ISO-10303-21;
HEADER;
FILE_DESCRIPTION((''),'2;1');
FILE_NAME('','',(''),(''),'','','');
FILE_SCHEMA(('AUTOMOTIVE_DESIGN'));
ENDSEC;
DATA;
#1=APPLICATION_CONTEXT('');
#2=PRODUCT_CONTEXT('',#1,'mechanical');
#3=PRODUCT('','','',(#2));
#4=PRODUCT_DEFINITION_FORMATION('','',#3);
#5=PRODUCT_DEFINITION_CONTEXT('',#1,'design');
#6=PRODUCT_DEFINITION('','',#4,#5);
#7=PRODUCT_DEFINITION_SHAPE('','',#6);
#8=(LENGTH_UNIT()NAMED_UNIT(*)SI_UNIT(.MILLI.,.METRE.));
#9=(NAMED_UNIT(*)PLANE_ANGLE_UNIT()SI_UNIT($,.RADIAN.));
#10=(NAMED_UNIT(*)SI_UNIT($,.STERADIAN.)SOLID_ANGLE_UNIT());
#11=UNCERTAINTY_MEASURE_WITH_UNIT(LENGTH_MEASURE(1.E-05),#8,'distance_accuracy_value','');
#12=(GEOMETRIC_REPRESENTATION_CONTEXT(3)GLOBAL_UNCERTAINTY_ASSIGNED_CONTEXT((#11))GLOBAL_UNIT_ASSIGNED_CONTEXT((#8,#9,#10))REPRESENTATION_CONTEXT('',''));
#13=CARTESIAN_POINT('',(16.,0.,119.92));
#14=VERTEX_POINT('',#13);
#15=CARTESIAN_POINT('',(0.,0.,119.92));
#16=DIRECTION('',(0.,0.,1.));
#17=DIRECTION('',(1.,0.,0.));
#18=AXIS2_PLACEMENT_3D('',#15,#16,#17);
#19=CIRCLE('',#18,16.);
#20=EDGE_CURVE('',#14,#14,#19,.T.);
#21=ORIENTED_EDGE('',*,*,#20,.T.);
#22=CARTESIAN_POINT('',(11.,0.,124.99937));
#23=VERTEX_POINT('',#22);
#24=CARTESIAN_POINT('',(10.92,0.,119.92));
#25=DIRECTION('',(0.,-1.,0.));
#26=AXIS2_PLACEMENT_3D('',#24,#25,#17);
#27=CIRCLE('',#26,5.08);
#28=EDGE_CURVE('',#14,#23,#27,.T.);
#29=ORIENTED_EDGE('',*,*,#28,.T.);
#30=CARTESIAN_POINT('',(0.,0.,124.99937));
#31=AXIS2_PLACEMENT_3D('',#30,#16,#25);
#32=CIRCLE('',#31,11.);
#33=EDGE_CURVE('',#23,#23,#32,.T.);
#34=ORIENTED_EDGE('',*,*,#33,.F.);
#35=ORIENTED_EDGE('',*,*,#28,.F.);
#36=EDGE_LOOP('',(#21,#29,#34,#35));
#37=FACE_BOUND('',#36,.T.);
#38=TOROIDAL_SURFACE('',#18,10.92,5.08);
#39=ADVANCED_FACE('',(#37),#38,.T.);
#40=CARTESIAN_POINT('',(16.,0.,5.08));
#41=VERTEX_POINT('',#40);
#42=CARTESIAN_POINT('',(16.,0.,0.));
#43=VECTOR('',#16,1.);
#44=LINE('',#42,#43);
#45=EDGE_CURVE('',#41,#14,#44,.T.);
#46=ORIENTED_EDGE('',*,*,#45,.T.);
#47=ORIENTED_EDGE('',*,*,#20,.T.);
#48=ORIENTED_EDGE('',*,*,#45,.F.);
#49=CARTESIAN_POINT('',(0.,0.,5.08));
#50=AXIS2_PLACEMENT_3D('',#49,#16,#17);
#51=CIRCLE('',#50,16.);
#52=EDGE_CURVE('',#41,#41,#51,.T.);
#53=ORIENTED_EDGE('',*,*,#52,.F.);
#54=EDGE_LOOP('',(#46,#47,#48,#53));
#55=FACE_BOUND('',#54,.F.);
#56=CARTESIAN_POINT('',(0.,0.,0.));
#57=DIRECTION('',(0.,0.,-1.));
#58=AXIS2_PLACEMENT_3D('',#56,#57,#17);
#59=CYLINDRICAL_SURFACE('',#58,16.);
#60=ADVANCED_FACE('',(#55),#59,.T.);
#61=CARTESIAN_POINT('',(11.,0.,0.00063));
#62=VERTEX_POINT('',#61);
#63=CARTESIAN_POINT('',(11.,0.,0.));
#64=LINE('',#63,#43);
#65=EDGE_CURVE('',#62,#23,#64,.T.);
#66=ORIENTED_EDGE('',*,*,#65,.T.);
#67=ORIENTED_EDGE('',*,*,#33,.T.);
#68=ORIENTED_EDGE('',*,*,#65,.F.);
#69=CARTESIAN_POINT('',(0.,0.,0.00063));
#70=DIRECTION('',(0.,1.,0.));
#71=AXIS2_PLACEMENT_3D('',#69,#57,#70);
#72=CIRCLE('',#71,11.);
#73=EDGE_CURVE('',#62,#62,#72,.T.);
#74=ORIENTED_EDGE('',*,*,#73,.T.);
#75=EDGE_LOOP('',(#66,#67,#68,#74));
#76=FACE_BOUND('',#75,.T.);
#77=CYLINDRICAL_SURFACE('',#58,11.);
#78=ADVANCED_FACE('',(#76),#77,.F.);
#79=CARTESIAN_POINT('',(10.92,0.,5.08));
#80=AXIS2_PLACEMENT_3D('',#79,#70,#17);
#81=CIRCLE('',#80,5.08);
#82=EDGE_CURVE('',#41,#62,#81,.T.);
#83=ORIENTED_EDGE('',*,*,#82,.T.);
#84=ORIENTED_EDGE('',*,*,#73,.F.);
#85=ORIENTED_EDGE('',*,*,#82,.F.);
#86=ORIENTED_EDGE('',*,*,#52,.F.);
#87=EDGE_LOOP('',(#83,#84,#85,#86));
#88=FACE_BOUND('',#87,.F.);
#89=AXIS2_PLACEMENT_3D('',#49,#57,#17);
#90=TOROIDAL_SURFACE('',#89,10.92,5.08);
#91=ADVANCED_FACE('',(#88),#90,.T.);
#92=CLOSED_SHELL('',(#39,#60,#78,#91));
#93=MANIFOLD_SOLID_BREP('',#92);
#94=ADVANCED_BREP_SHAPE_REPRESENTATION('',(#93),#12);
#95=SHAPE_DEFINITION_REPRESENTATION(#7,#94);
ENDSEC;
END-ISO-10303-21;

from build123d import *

# Parameters (mm, degrees)
F0_R     = 16
F0_R_2   = 11
F1_DEPTH = 125


# Not quite as in the source:
# - a fillet or chamfer that OpenCascade refuses, or shapes differently, is made with other operations: its cross-section is extruded or revolved along the edge and cut away or added


with BuildPart() as f1:
    # F0 (on Top) → F1 (new body)
    with BuildSketch(Plane.XY):
        Circle(F0_R)
        Circle(F0_R_2, mode=Mode.SUBTRACT)
    extrude(amount=F1_DEPTH)

    # F2: fillet of radius 5.08 on 1 edges, made by hand

    # F2_s1 → F2_t2 (revolve, cut)
    with BuildSketch(Plane.XZ):
        with BuildLine():
            ThreePointArc((16, 119.92), (14.5121024484, 123.5121024484), (10.92, 125))
            Line((10.92, 125), (16, 125))
            Line((16, 125), (16, 119.92))
        make_face()
    revolve(axis=Axis((0, 0, 125), (0, 0, 1)), mode=Mode.SUBTRACT)

    # F3: fillet of radius 5.08 on 1 edges, made by hand

    # F3_s1 → F3_t2 (revolve, cut)
    with BuildSketch(Plane.XZ):
        with BuildLine():
            ThreePointArc((16, 5.08), (14.5121024484, 1.4878975516), (10.92, 0))
            Line((10.92, 0), (16, 0))
            Line((16, 0), (16, 5.08))
        make_face()
    revolve(axis=Axis((0, 0, 0), (0, 0, 1)), mode=Mode.SUBTRACT)


solid = f1.part
